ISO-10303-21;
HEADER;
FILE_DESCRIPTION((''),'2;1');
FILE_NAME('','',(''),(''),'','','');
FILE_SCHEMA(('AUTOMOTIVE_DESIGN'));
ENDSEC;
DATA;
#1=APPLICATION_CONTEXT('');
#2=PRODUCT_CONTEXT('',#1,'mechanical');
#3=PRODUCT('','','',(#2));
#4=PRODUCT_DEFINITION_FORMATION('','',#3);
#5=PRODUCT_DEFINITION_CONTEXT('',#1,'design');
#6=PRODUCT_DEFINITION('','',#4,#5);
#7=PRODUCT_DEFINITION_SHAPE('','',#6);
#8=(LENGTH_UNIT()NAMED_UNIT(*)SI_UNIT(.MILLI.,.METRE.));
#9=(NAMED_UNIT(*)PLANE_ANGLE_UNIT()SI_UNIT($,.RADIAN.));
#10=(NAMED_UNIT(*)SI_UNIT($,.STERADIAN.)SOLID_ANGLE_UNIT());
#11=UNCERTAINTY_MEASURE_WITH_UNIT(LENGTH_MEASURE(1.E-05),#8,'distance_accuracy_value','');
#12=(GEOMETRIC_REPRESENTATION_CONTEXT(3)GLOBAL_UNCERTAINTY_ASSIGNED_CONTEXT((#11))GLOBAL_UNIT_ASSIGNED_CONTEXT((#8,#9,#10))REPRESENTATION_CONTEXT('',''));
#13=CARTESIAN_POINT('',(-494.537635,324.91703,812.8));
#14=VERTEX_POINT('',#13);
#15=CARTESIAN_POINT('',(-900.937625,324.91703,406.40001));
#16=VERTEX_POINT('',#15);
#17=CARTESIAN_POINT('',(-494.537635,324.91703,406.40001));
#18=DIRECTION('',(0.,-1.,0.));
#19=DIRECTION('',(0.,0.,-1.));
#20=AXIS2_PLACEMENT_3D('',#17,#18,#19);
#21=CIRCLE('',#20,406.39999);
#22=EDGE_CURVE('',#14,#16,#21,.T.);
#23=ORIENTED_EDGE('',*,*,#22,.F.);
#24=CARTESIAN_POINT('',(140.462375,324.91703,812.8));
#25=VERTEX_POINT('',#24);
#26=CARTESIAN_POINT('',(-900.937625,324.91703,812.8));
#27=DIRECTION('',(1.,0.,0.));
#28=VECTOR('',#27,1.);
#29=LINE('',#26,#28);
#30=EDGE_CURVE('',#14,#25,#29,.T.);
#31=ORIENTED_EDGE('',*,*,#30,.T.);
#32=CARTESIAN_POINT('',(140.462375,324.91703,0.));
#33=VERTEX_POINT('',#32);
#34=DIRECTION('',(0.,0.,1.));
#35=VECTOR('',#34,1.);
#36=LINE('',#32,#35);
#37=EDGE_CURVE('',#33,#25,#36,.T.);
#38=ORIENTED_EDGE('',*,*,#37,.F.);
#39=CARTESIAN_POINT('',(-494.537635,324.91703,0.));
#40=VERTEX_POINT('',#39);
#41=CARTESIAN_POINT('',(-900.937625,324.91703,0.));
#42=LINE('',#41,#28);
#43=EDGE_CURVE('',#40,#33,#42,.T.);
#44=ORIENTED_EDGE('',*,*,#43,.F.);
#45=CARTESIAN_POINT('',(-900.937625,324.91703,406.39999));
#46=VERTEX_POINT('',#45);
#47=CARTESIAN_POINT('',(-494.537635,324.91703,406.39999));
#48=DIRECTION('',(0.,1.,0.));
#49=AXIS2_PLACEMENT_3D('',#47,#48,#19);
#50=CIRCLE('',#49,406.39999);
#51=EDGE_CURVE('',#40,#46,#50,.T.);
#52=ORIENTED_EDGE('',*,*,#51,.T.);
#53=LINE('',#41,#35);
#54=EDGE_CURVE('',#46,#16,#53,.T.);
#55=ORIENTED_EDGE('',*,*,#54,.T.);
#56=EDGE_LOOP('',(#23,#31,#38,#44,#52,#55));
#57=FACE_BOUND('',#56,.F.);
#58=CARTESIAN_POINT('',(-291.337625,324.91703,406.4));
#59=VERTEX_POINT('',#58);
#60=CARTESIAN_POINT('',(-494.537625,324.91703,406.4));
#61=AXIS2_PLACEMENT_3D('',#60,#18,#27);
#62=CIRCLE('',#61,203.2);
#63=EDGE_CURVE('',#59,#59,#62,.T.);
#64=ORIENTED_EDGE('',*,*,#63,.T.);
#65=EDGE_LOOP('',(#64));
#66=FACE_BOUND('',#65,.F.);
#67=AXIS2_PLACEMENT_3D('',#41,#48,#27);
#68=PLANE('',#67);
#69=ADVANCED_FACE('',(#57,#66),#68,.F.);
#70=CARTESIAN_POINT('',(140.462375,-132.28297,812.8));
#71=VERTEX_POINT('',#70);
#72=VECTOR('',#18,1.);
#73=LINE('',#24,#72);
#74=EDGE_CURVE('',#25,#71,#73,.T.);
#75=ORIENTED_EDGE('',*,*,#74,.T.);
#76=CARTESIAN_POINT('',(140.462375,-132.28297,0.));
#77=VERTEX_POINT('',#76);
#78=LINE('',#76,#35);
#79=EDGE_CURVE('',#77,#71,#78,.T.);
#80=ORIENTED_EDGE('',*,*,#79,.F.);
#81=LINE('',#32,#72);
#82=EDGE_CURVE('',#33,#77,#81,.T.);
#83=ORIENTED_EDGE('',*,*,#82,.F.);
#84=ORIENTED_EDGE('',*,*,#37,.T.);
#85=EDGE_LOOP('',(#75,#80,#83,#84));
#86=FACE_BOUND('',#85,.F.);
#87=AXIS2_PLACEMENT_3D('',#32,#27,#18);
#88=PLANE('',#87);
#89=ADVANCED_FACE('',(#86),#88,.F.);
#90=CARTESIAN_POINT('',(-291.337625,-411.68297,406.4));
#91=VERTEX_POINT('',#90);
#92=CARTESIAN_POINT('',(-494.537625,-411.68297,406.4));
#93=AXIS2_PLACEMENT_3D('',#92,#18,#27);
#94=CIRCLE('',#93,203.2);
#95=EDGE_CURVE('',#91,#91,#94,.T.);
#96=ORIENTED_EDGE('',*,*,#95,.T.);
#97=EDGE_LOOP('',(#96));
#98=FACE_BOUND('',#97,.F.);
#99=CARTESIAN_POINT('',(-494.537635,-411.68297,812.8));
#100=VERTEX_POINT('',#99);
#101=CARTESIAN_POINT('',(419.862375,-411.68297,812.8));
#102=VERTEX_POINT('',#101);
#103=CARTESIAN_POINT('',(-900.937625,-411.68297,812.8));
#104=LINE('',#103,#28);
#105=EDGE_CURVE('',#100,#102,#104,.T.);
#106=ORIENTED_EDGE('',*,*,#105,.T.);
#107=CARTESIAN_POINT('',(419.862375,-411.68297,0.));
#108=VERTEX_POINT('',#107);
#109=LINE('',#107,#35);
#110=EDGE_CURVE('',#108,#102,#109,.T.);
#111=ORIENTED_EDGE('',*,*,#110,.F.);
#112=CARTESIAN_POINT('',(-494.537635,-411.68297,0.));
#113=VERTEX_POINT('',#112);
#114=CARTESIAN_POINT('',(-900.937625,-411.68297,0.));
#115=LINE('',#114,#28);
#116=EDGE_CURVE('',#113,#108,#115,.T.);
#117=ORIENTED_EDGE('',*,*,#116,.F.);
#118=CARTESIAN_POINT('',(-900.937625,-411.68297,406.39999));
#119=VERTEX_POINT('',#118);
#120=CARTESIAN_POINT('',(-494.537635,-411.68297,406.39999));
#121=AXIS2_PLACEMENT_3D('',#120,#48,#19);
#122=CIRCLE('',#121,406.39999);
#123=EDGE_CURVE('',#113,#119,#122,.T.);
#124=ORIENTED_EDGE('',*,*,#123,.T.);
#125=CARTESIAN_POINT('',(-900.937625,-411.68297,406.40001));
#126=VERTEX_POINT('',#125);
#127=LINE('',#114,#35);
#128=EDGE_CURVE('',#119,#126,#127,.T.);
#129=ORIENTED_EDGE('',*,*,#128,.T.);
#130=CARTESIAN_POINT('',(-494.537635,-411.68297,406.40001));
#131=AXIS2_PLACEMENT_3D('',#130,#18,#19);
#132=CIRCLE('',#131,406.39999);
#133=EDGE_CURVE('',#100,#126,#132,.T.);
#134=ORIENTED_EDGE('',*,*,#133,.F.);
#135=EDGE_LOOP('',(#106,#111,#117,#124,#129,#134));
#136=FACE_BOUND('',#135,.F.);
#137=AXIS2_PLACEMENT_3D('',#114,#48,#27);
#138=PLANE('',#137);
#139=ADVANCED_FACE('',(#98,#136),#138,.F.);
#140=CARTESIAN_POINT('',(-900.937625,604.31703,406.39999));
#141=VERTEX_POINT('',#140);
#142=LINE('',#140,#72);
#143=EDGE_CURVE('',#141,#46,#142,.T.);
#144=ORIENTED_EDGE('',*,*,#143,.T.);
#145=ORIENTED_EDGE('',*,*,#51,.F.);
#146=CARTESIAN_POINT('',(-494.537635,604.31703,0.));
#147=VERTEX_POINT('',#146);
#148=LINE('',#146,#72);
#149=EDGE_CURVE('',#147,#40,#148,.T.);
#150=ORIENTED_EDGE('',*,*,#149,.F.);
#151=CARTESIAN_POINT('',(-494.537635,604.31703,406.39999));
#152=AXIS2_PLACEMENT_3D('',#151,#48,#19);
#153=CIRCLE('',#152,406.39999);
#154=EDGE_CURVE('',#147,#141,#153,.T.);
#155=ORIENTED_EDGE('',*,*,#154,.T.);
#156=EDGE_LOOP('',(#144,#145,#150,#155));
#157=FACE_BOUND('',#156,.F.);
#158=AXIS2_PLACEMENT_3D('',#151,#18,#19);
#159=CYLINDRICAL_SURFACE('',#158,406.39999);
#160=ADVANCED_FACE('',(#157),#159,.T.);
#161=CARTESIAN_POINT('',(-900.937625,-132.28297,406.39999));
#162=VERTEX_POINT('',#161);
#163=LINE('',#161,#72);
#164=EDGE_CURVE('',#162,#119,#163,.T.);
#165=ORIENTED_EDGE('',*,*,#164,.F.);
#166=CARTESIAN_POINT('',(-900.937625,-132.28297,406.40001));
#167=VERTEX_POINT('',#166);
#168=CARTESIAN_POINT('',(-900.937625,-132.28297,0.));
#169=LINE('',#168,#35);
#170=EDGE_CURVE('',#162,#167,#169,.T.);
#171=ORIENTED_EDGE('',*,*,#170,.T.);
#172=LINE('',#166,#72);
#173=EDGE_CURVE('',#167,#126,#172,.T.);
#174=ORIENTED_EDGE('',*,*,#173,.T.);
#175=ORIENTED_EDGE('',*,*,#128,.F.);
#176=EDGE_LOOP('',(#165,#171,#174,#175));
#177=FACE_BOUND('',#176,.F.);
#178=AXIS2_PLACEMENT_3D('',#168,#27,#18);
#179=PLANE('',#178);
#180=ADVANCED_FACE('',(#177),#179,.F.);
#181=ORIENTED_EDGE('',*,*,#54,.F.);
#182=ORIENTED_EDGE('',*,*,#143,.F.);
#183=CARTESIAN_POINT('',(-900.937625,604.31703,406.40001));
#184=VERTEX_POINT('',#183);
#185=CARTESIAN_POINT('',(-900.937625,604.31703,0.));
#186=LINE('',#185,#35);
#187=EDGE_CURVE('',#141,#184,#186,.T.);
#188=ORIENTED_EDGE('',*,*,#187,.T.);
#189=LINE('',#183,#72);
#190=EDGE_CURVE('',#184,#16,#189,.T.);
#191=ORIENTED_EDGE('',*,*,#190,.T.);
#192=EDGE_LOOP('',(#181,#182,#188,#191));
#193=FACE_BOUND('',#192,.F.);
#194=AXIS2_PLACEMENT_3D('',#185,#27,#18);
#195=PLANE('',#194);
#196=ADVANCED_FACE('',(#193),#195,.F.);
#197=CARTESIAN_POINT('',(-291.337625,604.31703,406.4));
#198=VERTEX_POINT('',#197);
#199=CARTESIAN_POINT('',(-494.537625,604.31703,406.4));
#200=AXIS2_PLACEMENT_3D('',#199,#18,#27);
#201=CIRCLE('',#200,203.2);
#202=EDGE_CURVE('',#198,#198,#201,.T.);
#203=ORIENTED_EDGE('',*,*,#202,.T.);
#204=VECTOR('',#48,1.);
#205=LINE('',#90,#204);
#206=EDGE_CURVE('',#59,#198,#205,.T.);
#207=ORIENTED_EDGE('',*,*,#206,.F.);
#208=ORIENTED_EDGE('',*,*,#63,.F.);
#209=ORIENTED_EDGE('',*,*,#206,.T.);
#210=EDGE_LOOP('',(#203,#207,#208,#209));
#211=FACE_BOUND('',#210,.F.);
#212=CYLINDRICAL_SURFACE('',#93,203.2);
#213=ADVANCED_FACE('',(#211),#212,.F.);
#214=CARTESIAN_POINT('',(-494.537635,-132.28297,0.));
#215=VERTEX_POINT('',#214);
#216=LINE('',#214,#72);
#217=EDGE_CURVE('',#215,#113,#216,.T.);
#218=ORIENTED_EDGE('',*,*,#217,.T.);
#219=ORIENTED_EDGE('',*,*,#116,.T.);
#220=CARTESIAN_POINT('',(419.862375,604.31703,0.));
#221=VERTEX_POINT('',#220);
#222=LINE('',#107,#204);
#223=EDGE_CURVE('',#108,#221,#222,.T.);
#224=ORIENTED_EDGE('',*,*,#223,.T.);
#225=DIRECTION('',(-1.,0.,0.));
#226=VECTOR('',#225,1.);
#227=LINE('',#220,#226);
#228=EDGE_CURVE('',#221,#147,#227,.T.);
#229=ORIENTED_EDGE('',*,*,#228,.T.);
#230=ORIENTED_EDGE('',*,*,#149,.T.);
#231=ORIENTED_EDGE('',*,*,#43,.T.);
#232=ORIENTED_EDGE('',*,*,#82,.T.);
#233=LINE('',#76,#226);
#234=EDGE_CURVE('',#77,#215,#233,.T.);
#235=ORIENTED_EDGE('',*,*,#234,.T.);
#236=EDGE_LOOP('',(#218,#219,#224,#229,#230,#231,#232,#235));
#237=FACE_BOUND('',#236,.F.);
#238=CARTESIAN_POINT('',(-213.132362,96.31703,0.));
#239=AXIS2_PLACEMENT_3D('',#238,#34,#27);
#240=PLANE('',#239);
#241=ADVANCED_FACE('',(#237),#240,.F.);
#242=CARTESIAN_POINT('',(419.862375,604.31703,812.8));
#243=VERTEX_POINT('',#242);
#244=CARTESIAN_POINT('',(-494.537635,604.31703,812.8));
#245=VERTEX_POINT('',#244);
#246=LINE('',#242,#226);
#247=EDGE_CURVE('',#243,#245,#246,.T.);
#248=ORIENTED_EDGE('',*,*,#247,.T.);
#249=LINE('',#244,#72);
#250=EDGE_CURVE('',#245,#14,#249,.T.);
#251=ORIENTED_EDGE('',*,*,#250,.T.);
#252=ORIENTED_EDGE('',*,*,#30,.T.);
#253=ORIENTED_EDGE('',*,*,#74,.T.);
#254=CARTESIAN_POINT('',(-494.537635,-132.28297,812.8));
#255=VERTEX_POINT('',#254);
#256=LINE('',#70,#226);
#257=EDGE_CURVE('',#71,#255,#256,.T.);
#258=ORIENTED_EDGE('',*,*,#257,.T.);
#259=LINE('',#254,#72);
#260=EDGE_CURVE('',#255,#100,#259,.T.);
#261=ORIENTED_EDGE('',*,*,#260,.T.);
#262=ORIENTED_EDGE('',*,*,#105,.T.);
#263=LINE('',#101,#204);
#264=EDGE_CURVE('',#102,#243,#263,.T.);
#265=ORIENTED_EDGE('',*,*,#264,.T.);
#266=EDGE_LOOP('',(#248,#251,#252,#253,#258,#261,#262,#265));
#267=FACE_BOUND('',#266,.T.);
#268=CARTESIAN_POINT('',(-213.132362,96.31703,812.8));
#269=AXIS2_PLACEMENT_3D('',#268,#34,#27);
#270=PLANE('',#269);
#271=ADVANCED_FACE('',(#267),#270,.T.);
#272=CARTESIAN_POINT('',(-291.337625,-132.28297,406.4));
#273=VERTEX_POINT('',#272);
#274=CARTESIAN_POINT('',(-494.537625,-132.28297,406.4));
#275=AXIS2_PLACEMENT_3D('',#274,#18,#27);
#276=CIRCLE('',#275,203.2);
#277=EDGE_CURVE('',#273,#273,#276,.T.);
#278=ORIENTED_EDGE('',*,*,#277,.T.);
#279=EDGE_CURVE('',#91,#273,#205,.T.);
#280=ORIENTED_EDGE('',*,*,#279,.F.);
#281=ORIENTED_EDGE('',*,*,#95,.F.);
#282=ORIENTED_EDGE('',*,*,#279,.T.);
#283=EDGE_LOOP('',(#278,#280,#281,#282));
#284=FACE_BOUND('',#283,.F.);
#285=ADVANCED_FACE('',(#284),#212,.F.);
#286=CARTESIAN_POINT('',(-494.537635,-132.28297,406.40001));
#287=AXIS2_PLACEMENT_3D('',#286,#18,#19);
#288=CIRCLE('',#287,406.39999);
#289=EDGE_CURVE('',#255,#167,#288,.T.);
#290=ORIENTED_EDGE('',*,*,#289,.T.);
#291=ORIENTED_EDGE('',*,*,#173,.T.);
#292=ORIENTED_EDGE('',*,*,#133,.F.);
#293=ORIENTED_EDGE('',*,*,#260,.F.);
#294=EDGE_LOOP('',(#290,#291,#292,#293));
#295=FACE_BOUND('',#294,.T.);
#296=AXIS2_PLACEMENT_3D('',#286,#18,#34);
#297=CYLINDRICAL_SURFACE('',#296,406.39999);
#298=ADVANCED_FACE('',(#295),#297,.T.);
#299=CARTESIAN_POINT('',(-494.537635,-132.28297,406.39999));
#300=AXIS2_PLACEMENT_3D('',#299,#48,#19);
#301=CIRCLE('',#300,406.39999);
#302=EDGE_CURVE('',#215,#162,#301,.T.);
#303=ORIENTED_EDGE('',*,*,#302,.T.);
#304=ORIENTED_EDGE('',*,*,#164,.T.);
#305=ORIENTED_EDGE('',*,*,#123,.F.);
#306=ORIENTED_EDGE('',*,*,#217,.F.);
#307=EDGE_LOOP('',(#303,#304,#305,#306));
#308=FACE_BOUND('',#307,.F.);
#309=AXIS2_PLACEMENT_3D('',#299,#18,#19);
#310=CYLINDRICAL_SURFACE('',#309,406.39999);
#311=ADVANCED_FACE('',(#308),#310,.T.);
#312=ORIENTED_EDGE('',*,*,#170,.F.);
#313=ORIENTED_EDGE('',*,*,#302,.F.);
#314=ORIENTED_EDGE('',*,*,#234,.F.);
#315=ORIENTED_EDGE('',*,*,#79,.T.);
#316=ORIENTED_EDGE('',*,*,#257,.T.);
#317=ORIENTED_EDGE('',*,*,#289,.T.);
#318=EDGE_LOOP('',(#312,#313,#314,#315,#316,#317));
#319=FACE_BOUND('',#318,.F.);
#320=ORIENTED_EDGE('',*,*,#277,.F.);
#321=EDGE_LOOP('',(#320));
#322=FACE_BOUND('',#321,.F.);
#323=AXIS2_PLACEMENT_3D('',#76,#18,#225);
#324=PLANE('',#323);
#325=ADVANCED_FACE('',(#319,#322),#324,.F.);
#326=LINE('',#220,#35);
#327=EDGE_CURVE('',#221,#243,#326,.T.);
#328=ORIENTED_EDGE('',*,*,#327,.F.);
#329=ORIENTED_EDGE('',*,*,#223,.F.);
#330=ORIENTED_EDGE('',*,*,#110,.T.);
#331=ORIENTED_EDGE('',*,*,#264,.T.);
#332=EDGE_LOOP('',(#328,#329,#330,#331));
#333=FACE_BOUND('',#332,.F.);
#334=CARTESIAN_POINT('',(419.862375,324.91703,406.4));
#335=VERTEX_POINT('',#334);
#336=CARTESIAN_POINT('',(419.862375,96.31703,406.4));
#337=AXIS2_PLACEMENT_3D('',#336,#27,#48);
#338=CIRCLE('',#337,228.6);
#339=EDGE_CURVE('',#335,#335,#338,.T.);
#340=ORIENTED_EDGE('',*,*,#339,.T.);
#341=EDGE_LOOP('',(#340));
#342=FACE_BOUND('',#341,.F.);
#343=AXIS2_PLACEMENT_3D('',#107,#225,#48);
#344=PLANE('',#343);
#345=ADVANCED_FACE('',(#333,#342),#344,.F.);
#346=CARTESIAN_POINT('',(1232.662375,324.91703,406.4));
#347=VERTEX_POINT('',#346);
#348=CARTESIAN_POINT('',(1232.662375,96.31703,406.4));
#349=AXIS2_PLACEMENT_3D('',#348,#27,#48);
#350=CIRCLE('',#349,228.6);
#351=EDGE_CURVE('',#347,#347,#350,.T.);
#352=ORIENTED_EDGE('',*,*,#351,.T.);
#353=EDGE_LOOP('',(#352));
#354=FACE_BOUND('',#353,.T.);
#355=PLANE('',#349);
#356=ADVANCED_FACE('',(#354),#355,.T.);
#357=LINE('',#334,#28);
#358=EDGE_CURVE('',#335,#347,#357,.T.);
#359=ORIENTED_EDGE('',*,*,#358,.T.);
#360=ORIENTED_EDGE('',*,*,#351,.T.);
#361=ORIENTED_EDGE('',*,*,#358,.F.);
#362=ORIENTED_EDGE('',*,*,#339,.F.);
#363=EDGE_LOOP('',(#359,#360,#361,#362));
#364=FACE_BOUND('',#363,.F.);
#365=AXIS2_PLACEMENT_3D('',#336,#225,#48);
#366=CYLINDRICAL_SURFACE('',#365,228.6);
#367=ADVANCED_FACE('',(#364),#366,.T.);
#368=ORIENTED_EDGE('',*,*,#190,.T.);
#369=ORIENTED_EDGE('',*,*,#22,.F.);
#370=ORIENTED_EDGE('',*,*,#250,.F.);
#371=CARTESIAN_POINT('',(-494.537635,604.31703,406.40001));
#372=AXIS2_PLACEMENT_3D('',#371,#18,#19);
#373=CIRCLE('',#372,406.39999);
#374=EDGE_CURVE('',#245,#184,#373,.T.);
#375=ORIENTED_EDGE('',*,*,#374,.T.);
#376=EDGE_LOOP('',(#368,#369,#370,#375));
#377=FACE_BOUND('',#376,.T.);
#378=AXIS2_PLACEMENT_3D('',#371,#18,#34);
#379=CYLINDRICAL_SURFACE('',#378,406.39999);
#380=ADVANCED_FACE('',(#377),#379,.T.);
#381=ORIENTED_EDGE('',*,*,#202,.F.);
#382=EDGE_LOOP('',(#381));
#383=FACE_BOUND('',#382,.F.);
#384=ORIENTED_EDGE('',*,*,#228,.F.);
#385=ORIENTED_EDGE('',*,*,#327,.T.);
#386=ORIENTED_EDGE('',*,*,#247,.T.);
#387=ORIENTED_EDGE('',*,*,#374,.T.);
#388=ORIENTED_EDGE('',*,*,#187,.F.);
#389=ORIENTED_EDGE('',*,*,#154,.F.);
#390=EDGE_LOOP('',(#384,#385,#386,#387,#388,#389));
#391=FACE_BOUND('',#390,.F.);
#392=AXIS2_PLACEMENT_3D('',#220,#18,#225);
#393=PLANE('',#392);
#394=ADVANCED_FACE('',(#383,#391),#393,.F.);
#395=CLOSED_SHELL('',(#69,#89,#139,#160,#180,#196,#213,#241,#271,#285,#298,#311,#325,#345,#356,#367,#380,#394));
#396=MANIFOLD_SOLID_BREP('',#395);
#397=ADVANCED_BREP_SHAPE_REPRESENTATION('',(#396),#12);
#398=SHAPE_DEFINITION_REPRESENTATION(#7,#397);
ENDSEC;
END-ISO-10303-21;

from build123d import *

# Parameters (mm, degrees)
F1_DEPTH = 812.8
F2_R     = 203.2
F3_DEPTH = 1016
F4_R     = 228.6
F5_DEPTH = 812.8
F6_R     = 406.39999
F7_R     = 406.39999


# Not quite as in the source:
# - a fillet or chamfer is up to 0.001 mm smaller than in the source, because OpenCascade refuses the exact size


with BuildPart() as f1:
    # F0 (on Top) → F1 (new body)
    with BuildSketch(Plane.XY):
        Polygon((419.8623751171, -132.2829696707), (419.8623751171, 324.9170303293), (419.8623751171, 604.3170303293), (-900.9376248829, 604.3170303293), (-900.9376248829, 324.9170303293), (140.4623751171, 324.9170303293), (140.4623751171, -132.2829696707), (-900.9376248829, -132.2829696707), (-900.9376248829, -411.6829696707), (419.8623751171, -411.6829696707), align=None)
    extrude(amount=F1_DEPTH)

    # F2 (on face) → F3 (cut)
    with BuildSketch(Plane.XZ.offset(411.6829696707)):
        with Locations((-494.5376248829, 406.4)):
            Circle(F2_R)
    extrude(amount=-F3_DEPTH, mode=Mode.SUBTRACT)

    # F4 (on face) → F5 (join)
    with BuildSketch(Plane.YZ.offset(419.8623751171)):
        with Locations((96.3170303293, 406.4)):
            Circle(F4_R)
    extrude(amount=F5_DEPTH)

    # F6 (radius 406.4 in the source; OpenCascade refuses exactly that, so slightly less here)
    f6_edges = [f1.edges().sort_by_distance(p)[0] for p in [
        (-900.937625, 464.61703, 812.8),
        (-900.937625, 464.61703, 0),
    ]]
    fillet(f6_edges, radius=F6_R)

    # F7 (radius 406.4 in the source; OpenCascade refuses exactly that, so slightly less here)
    f7_edges = [f1.edges().sort_by_distance(p)[0] for p in [
        (-900.937625, -271.98297, 812.8),
        (-900.937625, -271.98297, 0),
    ]]
    fillet(f7_edges, radius=F7_R)


solid = f1.part
